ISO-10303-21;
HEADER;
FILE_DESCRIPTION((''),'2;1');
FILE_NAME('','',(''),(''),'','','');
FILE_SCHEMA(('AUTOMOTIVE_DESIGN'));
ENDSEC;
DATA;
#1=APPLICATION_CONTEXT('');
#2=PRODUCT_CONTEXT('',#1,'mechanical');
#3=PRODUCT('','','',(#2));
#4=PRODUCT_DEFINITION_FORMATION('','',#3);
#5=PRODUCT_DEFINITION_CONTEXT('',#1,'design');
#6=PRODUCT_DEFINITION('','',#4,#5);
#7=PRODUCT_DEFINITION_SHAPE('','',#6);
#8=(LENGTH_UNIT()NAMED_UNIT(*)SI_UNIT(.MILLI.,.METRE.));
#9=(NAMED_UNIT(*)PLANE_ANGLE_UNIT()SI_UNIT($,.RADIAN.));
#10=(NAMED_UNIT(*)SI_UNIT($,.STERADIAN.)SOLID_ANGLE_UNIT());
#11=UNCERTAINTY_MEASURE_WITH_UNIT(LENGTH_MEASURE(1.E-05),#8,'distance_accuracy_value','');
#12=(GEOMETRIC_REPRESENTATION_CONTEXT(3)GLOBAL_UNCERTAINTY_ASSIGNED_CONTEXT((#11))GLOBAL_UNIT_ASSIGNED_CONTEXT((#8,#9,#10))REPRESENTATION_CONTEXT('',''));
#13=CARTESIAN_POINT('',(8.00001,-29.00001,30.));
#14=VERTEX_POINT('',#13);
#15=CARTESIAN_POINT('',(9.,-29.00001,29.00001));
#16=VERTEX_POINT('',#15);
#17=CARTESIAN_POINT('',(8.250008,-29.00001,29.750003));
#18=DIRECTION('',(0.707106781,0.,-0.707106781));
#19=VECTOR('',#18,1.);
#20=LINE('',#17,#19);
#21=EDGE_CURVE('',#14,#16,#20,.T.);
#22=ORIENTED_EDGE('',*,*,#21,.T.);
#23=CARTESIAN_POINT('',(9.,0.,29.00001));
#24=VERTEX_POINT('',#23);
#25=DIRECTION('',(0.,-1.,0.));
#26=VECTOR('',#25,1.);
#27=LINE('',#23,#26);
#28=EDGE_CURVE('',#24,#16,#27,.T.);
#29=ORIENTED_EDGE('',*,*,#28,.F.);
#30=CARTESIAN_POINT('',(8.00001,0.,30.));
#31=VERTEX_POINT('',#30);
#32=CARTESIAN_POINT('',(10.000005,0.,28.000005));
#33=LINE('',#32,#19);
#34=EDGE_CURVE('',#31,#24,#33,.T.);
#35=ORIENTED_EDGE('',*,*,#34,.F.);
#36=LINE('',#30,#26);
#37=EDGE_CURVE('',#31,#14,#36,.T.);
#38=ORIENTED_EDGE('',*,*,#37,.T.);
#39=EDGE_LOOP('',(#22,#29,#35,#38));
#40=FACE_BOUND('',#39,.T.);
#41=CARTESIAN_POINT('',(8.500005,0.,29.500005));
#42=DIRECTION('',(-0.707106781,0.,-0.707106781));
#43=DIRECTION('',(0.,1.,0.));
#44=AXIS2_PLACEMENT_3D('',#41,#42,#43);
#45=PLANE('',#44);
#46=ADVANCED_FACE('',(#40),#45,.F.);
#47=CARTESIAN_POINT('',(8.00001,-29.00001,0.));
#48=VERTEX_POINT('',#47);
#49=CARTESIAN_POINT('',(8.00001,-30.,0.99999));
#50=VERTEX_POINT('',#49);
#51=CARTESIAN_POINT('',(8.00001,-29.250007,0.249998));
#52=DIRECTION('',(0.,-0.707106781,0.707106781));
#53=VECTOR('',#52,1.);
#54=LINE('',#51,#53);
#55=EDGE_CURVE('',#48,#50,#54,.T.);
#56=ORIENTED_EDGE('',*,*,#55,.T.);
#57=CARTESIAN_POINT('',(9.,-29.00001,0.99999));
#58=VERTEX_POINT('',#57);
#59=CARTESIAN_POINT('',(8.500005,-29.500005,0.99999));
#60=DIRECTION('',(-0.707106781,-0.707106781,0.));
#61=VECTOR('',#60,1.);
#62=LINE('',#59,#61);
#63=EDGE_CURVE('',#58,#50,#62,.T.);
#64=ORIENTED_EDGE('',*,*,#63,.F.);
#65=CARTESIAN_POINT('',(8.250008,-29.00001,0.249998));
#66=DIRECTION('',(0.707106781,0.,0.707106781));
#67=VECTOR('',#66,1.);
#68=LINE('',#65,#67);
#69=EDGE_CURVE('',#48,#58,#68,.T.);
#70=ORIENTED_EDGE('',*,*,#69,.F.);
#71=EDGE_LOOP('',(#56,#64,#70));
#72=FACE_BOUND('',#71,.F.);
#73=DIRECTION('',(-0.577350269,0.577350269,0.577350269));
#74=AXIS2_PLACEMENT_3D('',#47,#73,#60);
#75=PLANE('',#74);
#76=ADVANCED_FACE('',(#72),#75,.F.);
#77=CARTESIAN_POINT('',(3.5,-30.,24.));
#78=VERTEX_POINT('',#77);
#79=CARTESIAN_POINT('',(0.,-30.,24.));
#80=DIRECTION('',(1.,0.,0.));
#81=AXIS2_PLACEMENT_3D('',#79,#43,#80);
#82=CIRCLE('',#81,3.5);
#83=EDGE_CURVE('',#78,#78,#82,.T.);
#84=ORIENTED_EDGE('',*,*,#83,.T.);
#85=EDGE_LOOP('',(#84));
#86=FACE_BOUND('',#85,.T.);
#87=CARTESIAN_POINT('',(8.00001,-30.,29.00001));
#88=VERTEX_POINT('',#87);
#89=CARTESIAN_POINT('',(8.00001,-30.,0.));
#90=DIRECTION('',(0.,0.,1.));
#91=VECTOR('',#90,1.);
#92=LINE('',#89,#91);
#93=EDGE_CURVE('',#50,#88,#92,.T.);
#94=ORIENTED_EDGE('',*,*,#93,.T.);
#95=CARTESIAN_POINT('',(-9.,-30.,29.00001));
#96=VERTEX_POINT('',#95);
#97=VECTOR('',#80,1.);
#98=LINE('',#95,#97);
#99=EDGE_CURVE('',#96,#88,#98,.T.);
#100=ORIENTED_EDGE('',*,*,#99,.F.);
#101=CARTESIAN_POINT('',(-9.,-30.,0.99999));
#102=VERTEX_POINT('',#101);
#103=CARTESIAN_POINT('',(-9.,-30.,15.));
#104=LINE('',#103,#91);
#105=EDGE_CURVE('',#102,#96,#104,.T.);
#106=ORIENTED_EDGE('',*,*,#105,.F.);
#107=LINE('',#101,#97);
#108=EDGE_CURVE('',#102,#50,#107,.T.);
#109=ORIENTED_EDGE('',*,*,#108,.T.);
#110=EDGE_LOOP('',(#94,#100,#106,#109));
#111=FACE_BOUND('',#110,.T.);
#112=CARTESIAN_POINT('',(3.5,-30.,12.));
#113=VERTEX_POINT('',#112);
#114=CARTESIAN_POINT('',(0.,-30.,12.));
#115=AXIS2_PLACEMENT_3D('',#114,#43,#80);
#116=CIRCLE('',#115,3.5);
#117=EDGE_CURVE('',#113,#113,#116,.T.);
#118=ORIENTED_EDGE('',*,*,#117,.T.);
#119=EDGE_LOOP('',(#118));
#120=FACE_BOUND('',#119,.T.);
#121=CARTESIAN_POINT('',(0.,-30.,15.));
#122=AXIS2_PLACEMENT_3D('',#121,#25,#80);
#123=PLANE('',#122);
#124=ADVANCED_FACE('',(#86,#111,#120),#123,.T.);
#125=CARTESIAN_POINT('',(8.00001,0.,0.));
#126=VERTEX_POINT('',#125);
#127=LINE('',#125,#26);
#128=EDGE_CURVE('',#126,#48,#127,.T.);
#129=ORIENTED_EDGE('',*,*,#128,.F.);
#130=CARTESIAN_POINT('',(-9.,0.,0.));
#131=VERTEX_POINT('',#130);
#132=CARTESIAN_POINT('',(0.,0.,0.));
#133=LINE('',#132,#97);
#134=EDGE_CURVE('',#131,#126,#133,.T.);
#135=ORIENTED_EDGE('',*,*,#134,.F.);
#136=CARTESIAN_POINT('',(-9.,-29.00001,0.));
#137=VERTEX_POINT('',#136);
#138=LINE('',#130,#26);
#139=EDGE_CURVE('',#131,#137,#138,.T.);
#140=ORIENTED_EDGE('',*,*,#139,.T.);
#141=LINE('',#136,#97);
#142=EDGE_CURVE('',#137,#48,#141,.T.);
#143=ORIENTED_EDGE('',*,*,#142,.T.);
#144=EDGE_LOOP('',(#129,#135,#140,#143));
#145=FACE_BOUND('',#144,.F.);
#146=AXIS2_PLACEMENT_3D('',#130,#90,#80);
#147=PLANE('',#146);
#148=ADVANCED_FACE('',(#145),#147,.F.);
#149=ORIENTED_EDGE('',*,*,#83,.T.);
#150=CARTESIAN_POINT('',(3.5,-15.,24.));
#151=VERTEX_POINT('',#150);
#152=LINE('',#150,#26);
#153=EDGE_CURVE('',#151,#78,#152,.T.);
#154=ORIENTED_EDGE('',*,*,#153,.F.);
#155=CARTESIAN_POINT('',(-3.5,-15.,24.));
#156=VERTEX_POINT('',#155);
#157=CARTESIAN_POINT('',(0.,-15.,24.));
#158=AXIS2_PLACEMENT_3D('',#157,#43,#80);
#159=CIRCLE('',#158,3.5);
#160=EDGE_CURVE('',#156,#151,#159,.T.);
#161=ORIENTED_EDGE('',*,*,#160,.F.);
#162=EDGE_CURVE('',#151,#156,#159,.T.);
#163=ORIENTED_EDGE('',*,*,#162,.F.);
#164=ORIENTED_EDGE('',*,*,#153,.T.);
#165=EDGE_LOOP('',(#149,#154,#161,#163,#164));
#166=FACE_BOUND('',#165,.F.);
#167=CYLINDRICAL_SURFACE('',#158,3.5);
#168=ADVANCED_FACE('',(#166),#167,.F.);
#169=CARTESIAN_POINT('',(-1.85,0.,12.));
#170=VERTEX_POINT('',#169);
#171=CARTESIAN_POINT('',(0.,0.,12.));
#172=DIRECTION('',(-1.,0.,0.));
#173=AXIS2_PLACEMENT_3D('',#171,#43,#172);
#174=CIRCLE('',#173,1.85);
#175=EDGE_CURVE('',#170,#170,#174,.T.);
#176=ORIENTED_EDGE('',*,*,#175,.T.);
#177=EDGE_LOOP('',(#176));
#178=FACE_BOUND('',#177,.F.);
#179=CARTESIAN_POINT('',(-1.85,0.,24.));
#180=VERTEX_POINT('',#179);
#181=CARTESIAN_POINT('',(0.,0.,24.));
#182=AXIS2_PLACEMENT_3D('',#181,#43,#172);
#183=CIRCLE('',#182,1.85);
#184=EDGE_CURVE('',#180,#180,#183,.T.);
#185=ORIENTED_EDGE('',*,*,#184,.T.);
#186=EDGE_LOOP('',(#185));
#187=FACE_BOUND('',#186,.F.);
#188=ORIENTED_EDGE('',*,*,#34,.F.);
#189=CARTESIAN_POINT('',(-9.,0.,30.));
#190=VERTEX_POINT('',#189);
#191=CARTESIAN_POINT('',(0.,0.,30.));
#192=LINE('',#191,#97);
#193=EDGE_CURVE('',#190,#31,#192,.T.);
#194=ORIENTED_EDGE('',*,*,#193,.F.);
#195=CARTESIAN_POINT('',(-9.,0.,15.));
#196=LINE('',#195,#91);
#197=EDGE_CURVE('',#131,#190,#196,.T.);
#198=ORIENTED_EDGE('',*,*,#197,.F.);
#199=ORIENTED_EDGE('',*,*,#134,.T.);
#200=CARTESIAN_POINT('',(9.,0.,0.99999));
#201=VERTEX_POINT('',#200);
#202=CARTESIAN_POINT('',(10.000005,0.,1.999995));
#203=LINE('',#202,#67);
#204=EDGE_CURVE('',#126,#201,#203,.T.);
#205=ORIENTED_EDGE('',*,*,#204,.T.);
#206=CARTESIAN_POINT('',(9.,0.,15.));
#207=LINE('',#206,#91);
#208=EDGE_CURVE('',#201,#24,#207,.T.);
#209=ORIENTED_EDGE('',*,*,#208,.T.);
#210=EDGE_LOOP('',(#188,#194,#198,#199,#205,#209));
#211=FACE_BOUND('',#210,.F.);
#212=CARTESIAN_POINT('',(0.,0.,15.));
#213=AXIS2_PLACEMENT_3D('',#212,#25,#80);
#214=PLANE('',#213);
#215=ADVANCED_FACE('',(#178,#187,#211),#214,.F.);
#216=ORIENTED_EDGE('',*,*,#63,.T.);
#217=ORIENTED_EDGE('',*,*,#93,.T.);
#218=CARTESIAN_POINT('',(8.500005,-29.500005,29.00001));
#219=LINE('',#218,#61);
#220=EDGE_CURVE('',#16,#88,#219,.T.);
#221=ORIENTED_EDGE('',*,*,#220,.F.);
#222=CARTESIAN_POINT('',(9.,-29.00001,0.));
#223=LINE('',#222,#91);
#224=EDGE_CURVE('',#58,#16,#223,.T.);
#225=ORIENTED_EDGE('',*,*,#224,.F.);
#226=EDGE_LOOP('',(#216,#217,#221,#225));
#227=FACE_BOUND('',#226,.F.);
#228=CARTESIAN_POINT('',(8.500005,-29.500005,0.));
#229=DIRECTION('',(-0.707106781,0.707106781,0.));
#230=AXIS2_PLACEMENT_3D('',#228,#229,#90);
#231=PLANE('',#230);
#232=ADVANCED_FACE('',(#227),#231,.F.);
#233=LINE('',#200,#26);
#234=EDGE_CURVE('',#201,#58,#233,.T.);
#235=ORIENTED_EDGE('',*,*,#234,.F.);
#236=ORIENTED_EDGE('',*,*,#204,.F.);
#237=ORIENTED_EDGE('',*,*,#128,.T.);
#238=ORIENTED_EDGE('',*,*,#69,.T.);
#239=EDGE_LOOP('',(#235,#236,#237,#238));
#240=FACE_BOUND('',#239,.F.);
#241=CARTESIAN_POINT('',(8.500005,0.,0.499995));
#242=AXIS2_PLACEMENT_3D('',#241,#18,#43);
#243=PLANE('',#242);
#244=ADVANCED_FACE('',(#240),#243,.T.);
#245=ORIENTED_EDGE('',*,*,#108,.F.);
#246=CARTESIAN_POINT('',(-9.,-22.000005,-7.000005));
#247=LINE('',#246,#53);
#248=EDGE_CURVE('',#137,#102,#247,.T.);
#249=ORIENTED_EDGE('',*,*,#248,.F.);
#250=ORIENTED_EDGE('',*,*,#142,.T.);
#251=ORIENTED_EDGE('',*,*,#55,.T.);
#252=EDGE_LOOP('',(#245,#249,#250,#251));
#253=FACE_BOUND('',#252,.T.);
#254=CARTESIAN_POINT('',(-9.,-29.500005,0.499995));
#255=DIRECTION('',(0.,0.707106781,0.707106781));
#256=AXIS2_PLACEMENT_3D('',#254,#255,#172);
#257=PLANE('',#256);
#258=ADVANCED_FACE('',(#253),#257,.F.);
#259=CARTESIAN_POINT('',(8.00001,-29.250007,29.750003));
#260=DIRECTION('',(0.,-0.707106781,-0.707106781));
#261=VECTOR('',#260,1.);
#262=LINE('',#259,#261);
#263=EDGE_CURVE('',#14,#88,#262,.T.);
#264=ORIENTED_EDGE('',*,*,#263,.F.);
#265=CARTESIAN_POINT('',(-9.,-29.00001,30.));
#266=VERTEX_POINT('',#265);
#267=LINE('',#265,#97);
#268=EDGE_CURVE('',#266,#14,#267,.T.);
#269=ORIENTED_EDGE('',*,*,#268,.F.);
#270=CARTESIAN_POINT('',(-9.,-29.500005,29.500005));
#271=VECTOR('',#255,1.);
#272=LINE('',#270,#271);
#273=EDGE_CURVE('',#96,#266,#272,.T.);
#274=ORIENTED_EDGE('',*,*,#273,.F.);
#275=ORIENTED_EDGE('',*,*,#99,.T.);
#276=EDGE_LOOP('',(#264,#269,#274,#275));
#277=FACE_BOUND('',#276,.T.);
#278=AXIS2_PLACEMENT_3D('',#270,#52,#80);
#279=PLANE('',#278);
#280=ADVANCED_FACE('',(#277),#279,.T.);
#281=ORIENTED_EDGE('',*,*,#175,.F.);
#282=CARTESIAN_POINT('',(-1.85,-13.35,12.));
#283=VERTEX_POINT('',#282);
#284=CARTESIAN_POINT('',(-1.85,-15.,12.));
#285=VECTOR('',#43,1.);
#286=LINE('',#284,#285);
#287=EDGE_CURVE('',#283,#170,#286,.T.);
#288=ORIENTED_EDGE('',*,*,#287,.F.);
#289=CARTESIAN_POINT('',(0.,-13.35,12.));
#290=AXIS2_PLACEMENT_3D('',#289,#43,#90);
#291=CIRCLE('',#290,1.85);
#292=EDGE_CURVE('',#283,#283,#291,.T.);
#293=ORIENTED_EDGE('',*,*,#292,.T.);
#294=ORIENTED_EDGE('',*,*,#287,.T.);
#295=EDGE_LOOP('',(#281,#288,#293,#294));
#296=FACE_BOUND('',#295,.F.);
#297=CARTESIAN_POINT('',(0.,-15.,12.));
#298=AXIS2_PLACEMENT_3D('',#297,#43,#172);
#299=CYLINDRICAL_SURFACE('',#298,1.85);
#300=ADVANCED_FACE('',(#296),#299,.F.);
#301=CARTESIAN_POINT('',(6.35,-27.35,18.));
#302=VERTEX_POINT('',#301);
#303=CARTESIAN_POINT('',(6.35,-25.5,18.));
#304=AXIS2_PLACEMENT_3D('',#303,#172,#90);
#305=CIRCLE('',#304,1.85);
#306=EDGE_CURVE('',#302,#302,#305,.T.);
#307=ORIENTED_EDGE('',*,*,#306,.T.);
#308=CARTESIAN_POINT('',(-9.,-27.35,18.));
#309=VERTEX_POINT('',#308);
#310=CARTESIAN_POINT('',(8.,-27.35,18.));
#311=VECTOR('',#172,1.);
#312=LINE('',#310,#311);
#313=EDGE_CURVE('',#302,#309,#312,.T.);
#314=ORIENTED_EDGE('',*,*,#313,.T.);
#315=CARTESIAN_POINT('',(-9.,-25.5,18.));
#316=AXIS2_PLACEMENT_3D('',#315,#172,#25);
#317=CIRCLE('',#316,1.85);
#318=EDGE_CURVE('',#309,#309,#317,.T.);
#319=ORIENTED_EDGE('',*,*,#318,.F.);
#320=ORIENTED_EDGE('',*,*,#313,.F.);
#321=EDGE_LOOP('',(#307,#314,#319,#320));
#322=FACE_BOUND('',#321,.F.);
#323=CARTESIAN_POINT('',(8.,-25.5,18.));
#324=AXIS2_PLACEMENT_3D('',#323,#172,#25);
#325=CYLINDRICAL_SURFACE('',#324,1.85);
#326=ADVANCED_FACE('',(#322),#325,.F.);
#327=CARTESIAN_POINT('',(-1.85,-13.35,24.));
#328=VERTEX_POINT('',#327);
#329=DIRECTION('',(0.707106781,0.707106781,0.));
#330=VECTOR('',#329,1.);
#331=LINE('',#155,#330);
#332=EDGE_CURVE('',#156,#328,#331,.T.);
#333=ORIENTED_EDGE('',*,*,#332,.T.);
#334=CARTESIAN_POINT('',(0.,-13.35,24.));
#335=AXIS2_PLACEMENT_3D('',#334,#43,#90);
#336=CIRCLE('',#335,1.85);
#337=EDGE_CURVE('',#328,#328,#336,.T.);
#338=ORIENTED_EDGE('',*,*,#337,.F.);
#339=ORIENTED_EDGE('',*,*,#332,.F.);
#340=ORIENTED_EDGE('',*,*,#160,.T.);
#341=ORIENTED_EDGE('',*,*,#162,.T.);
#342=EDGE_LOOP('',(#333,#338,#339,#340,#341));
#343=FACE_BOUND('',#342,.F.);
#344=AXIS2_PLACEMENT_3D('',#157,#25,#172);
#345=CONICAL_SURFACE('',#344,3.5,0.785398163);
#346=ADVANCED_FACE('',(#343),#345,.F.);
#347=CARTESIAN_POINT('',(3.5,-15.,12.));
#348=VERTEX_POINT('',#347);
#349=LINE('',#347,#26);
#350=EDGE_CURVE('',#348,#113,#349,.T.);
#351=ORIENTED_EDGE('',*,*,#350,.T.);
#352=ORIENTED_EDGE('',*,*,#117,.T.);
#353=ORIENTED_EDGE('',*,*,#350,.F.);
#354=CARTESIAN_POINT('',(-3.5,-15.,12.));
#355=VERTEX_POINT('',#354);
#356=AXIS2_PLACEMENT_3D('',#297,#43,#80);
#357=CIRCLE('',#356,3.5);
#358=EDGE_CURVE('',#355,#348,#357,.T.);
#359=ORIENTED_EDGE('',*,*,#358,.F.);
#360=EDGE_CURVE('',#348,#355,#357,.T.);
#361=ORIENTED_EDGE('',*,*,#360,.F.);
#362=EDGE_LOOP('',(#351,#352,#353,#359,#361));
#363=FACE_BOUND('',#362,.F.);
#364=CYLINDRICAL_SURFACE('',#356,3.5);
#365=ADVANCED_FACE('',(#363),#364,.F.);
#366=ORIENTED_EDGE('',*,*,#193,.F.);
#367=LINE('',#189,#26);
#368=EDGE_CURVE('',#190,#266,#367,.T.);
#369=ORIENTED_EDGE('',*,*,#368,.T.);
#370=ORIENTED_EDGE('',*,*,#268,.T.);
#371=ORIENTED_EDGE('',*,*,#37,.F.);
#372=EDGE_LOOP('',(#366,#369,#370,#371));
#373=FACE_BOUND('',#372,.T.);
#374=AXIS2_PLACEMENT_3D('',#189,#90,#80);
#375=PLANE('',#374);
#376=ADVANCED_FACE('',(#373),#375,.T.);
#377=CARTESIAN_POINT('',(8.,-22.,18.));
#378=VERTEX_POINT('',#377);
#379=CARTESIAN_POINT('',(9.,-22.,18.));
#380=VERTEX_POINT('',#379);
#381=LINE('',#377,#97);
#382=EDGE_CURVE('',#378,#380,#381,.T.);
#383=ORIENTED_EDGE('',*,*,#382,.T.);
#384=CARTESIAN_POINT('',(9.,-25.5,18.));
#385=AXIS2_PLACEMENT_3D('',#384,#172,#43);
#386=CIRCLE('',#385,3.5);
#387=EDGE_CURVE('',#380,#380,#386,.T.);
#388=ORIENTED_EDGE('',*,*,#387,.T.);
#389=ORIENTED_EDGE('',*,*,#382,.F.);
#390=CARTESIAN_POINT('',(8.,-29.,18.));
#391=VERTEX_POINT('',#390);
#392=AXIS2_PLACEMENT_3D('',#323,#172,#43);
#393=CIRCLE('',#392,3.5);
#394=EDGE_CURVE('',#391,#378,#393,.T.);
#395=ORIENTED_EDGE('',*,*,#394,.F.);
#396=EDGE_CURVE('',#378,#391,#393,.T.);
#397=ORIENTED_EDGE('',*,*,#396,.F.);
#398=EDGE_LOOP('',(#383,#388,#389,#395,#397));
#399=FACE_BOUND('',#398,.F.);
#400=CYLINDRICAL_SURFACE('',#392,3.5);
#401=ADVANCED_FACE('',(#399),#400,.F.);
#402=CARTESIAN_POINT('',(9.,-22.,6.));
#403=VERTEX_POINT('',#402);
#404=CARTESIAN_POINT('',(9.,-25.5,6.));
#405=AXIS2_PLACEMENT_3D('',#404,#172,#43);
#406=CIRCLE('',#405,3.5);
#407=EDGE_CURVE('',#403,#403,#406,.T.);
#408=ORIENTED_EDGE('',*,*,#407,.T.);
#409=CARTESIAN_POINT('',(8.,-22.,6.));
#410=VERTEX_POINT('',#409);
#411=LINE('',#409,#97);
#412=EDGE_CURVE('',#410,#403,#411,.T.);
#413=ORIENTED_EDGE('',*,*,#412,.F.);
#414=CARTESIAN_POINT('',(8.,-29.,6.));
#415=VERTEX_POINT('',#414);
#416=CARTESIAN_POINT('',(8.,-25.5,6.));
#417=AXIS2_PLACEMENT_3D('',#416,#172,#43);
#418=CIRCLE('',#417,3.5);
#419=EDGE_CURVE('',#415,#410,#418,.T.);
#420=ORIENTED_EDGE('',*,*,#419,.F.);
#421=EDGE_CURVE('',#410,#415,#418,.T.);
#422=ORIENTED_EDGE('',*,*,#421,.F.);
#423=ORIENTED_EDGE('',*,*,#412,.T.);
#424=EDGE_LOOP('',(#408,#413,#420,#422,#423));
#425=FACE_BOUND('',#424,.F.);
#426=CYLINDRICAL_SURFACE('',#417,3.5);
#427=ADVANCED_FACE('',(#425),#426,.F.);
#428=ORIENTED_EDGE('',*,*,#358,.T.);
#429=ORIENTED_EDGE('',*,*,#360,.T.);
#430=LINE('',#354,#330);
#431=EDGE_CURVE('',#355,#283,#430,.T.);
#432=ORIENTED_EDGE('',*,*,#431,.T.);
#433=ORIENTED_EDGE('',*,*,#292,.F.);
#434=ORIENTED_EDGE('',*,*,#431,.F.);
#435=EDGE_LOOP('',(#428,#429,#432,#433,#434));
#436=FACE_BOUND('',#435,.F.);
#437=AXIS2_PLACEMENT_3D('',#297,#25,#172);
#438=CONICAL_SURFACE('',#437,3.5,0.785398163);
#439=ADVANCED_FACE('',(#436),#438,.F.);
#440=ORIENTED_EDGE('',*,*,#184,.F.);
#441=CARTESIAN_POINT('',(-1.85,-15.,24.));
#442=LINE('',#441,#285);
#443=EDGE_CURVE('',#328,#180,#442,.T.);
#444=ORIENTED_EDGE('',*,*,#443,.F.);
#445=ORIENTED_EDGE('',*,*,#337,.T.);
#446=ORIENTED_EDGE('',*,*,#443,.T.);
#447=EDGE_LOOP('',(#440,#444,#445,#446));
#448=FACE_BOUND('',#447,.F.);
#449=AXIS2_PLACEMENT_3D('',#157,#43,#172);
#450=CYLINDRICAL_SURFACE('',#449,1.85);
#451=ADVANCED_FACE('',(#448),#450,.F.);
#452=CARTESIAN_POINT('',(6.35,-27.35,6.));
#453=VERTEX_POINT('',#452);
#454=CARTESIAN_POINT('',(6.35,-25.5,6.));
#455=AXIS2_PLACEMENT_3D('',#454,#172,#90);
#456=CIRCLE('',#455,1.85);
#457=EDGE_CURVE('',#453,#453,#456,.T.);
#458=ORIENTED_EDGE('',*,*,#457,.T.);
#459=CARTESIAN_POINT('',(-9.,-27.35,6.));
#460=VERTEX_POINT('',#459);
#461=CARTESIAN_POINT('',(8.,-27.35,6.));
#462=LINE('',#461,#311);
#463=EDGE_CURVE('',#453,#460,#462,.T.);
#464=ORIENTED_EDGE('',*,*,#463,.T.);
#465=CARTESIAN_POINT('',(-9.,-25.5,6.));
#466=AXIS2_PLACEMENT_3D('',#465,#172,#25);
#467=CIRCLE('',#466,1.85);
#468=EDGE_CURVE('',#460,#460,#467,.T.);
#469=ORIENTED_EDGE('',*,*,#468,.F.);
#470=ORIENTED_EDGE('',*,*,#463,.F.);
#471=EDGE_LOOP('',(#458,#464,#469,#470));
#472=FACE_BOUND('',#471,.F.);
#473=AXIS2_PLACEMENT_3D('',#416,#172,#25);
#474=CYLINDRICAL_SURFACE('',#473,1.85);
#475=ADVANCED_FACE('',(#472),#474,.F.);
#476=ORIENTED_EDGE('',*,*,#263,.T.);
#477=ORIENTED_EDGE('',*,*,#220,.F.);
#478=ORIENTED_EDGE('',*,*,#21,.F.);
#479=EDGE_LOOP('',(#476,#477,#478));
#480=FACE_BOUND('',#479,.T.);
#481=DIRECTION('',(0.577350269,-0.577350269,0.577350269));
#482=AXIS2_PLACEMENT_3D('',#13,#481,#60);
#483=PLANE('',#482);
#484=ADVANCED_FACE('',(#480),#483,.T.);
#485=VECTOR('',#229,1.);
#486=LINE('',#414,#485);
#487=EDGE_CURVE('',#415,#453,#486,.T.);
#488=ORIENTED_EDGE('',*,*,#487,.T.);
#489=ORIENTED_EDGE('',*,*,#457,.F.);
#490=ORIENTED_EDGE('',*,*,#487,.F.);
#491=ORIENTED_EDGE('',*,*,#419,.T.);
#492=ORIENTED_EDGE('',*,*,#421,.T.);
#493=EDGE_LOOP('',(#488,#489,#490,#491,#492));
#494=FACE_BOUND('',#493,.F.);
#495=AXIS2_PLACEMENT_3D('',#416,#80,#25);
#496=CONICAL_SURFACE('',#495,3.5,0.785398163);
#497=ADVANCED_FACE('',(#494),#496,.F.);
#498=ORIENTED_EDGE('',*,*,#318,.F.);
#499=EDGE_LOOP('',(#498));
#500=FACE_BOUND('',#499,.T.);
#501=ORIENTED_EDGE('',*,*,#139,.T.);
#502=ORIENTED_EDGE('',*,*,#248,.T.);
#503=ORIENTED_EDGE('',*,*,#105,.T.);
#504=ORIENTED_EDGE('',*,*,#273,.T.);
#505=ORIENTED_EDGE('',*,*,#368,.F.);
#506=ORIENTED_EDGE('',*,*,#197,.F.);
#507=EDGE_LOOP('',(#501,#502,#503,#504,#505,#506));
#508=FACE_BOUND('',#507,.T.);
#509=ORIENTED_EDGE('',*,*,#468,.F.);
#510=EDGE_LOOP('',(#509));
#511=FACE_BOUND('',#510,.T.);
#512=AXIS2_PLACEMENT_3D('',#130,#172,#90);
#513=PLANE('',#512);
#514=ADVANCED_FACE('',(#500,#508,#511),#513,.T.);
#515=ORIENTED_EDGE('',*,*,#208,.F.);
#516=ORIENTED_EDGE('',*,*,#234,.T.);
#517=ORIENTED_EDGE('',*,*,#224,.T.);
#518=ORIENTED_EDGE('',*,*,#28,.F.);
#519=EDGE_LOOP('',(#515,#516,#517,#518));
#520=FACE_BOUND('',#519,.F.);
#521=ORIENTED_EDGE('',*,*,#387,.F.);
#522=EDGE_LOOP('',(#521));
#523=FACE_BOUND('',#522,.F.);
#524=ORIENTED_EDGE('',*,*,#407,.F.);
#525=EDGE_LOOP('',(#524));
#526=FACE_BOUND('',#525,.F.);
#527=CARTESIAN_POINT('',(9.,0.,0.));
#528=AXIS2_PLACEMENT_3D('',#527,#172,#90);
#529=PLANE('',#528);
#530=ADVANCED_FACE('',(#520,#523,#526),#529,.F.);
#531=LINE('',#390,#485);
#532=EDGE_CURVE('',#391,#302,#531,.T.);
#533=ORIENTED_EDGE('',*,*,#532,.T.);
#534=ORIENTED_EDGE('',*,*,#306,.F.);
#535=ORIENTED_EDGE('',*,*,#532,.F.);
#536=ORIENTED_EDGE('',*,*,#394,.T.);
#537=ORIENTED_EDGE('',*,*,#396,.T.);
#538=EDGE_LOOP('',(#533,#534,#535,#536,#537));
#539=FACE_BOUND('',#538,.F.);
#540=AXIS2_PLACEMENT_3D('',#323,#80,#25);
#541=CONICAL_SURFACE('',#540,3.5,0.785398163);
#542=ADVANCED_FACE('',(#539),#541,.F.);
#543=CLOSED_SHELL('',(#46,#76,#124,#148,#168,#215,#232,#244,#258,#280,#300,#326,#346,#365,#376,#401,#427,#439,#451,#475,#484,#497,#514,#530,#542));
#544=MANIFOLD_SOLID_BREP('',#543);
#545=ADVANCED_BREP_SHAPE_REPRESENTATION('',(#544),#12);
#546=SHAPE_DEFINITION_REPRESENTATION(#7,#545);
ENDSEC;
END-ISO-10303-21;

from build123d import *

# Parameters (mm, degrees)
F0_W           = 18
F0_H           = 30
F1_DEPTH       = 30
F4_D           = 7
F4_DEPTH       = 15.001
F5_D           = 3.7
F5_CSINK_D     = 7
F5_CSINK_ANGLE = 90
F8_D           = 7
F8_DEPTH       = 1.001
F9_D           = 3.7
F9_CSINK_D     = 7
F9_CSINK_ANGLE = 90
F10_SIZE       = 0.99999


# Not quite as in the source:
# - a fillet or chamfer is up to 0.001 mm smaller than in the source, because OpenCascade refuses the exact size


with BuildPart() as f1:
    # F0 (on Front) → F1 (new body)
    with BuildSketch(Plane.XZ):
        with Locations((0, 15)):
            Rectangle(F0_W, F0_H)
    extrude(amount=F1_DEPTH)

    # F4 (through all, one way)
    with BuildSketch(Plane(origin=(0, -15, 0), x_dir=(1, 0, 0), z_dir=(0, 1, 0))):
        with Locations((0, -24), (0, -12)):
            Circle(F4_D / 2)
    extrude(amount=-F4_DEPTH, mode=Mode.SUBTRACT)

    # F5 (through all)
    with Locations(Plane.XZ.offset(15)):
        with Locations((0, 24), (0, 12)):
            CounterSinkHole(F5_D / 2, F5_CSINK_D / 2, counter_sink_angle=F5_CSINK_ANGLE)

    # F8 (through all, one way)
    with BuildSketch(Plane(origin=(8, 0, 0), x_dir=(0, 1, 0), z_dir=(-1, 0, 0))):
        with Locations((-25.5, -18), (-25.5, -6)):
            Circle(F8_D / 2)
    extrude(amount=-F8_DEPTH, mode=Mode.SUBTRACT)

    # F9 (through all)
    with Locations(Plane.YZ.offset(8)):
        with Locations((-25.5, 18), (-25.5, 6)):
            CounterSinkHole(F9_D / 2, F9_CSINK_D / 2, counter_sink_angle=F9_CSINK_ANGLE)

    # F10 (size 1 in the source; OpenCascade refuses exactly that, so slightly less here)
    f10_edges = [f1.edges().sort_by_distance(p)[0] for p in [
        (9, -30, 15),
        (9, -15, 30),
        (0, -30, 30),
        (9, -15, 0),
        (0, -30, 0),
    ]]
    chamfer(f10_edges, length=F10_SIZE)


solid = f1.part
